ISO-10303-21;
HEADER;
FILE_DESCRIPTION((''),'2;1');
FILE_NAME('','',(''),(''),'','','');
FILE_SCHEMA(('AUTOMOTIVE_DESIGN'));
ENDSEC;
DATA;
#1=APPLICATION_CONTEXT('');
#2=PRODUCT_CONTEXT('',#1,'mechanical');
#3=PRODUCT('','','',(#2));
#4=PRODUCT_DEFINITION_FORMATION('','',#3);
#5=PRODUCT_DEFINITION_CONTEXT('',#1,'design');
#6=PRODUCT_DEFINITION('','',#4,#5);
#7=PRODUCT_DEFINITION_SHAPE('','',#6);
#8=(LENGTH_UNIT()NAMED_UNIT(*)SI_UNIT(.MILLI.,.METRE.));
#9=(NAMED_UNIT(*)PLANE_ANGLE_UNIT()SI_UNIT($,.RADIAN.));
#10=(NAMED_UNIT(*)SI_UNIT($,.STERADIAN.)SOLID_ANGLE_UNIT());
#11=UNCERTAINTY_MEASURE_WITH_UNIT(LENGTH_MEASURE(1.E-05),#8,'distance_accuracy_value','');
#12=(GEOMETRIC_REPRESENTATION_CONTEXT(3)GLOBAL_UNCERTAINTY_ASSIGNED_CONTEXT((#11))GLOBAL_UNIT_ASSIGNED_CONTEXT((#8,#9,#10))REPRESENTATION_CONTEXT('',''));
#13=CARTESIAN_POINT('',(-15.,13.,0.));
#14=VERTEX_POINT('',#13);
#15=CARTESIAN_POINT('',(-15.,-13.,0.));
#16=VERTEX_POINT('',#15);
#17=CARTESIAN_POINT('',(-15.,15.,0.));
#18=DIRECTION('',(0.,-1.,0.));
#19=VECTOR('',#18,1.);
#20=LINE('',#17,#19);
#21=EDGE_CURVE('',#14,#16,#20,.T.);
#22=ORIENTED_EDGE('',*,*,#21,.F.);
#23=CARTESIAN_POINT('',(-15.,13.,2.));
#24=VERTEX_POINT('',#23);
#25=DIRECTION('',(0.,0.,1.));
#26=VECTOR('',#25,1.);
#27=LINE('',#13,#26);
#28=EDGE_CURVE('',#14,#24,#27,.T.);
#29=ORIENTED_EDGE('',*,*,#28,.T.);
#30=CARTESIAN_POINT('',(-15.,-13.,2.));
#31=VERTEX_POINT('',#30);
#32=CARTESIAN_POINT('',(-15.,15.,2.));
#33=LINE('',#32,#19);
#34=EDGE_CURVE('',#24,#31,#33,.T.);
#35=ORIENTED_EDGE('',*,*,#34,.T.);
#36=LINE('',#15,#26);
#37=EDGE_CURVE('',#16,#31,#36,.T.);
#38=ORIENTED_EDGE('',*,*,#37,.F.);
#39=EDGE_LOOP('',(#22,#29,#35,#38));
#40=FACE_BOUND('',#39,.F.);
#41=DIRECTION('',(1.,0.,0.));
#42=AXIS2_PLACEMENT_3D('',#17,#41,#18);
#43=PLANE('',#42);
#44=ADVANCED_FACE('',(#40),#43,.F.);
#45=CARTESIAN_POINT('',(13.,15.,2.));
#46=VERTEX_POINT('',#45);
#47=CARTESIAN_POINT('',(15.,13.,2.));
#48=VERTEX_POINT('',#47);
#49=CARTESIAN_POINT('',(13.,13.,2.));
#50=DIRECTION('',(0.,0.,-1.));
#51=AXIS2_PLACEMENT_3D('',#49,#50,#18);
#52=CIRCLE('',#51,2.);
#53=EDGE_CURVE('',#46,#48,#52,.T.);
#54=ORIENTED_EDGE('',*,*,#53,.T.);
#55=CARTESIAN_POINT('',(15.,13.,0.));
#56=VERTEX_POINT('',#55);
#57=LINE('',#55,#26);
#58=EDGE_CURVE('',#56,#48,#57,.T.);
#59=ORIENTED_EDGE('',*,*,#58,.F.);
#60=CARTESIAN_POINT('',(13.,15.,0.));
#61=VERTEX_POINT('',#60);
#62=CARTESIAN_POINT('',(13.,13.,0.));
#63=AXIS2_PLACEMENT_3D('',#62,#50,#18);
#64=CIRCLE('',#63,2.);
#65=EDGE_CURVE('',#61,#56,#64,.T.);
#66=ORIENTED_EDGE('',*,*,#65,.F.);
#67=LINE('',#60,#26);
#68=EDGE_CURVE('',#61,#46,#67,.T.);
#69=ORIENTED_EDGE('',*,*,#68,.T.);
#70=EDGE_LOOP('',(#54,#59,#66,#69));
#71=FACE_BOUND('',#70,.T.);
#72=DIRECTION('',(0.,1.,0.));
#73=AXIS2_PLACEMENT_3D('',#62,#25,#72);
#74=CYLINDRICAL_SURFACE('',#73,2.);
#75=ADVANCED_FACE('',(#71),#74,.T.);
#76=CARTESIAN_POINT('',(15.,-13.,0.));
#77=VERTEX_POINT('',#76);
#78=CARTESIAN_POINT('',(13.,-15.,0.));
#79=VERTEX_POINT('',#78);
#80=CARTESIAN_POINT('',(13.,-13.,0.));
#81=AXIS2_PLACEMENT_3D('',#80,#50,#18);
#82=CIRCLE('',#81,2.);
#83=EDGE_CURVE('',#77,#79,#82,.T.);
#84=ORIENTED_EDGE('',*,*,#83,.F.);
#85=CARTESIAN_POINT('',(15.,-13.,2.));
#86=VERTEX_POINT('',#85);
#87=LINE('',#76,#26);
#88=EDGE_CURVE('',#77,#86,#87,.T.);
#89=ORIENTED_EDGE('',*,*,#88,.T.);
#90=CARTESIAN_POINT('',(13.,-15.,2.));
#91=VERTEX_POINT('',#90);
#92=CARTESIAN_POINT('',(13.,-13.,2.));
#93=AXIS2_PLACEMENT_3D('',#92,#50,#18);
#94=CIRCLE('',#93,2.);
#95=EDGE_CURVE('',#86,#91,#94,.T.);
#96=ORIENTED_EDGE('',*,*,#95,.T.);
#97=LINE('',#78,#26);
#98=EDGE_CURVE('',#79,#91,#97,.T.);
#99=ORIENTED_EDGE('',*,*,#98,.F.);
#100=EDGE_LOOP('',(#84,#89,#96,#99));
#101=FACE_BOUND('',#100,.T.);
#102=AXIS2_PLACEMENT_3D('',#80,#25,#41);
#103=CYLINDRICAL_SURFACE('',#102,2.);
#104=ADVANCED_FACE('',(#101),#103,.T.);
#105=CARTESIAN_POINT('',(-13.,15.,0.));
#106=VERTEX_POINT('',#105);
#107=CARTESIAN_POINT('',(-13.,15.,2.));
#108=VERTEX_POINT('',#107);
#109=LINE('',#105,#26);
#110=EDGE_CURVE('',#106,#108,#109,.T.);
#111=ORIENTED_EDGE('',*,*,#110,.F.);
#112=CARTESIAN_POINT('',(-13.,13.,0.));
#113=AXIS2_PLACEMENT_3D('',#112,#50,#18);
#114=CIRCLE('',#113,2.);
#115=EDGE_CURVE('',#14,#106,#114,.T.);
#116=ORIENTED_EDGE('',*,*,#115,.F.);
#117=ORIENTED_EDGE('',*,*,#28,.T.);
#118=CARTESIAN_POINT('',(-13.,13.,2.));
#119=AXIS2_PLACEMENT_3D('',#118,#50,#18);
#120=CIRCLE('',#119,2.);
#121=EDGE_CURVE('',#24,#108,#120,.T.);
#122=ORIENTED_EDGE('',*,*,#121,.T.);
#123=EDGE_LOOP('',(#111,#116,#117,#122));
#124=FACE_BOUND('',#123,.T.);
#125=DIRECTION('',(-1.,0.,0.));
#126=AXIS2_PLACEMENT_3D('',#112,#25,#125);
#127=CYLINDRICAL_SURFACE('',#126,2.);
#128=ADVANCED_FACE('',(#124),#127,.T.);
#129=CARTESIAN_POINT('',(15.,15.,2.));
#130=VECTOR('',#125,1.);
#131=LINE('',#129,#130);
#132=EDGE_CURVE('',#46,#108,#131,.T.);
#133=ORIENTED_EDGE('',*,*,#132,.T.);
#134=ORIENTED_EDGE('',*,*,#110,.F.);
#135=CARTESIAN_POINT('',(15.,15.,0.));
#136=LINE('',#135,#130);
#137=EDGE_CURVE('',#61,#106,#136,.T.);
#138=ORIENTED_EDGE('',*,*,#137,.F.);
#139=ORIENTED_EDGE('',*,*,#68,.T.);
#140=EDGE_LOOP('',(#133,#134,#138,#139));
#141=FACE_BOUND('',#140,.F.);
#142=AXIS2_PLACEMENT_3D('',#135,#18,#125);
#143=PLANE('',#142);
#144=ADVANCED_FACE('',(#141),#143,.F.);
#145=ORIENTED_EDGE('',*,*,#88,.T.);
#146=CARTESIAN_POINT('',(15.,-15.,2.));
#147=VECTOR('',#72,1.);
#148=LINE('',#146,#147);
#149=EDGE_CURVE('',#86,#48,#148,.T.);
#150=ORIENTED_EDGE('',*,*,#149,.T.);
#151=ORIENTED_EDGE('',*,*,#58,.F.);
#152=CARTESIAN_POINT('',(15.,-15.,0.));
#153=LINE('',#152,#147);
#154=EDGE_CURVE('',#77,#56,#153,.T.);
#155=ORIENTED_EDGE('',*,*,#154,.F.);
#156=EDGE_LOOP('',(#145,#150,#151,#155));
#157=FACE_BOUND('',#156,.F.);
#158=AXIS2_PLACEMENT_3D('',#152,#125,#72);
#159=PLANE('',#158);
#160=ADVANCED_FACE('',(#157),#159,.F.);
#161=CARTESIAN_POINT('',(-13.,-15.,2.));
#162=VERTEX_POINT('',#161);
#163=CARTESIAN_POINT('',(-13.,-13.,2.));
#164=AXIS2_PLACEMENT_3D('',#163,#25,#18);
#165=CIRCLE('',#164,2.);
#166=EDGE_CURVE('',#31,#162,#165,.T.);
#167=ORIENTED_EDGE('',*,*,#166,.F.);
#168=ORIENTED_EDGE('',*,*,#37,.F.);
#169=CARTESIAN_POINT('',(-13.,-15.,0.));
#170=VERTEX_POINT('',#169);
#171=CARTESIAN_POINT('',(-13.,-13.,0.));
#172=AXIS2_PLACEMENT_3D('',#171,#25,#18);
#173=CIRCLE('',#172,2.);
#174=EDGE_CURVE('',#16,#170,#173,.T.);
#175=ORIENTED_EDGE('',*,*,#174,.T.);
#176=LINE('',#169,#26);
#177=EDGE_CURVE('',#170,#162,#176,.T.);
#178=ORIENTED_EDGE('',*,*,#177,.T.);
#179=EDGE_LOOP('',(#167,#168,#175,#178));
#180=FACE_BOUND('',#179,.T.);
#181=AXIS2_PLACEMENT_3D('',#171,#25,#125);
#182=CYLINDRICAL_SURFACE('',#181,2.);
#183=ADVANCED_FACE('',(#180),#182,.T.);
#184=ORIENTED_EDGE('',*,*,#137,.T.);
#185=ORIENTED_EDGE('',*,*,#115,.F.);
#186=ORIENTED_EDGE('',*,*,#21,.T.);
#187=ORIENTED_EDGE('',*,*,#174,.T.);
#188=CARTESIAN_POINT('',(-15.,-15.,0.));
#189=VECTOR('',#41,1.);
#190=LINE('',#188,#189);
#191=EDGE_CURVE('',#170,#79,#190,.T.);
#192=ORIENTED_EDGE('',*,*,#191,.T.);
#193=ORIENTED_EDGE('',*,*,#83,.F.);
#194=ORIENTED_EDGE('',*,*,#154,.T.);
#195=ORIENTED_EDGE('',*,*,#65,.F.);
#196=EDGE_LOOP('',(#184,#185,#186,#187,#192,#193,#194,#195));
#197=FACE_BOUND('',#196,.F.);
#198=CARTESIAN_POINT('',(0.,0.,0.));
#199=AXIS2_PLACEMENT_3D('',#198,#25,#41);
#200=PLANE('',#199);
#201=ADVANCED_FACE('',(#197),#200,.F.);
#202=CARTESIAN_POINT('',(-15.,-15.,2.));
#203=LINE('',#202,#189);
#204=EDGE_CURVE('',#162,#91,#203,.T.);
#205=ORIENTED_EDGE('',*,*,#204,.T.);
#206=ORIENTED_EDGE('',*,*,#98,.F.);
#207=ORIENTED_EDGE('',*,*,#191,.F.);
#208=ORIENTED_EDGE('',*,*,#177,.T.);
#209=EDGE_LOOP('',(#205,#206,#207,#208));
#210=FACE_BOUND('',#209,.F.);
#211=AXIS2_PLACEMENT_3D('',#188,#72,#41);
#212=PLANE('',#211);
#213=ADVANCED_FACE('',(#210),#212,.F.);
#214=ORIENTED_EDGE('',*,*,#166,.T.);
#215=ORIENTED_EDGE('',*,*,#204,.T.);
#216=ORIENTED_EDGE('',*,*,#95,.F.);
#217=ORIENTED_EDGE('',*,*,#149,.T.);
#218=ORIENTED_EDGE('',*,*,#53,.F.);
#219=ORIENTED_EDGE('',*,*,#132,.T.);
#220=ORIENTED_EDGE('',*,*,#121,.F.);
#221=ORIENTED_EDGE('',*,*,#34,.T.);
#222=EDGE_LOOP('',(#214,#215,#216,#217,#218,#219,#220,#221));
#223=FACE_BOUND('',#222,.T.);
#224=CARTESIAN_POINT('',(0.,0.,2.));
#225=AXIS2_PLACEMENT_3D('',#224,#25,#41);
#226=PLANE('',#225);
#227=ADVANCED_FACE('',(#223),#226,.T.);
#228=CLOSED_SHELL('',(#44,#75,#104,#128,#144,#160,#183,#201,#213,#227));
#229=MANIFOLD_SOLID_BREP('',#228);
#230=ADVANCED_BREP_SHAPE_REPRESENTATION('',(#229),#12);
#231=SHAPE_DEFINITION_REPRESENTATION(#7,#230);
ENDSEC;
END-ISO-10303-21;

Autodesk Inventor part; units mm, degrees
ref_plane "YZ Plane" through (0, 0, 0) normal (1, 0, 0) x (0, 1, 0)
ref_plane "XZ Plane" through (0, 0, 0) normal (0, 1, 0) x (-1, 0, 0)
ref_plane "XY Plane" through (0, 0, 0) normal (0, 0, 1) x (1, 0, 0)
sketch "Sketch1" plane through (0, 0, 0) normal (0, 0, 1) x (1, 0, 0)
  line L0 (-15, -15) -> (15, -15)
  line L1 (15, -15) -> (15, 15)
  line L2 (15, 15) -> (-15, 15)
  line L3 (-15, 15) -> (-15, -15)
  line L4 (-15, -15) -> (15, 15) construction
  line L5 (15, -15) -> (-15, 15) construction
  point P0 (0, 0)
  dimension "d154" = 30
  dimension "d155" = 30
extrude "Plate5" add sketch "Sketch1" along normal blind 2
fillet "Corner Round1" radius 2 4 edges at (15, 15, 1) (-15, 15, 1) (-15, -15, 1) (15, -15, 1)
properties part number "PNS 1666 FDS 1000 CUP 1" material "Stainless Steel"
